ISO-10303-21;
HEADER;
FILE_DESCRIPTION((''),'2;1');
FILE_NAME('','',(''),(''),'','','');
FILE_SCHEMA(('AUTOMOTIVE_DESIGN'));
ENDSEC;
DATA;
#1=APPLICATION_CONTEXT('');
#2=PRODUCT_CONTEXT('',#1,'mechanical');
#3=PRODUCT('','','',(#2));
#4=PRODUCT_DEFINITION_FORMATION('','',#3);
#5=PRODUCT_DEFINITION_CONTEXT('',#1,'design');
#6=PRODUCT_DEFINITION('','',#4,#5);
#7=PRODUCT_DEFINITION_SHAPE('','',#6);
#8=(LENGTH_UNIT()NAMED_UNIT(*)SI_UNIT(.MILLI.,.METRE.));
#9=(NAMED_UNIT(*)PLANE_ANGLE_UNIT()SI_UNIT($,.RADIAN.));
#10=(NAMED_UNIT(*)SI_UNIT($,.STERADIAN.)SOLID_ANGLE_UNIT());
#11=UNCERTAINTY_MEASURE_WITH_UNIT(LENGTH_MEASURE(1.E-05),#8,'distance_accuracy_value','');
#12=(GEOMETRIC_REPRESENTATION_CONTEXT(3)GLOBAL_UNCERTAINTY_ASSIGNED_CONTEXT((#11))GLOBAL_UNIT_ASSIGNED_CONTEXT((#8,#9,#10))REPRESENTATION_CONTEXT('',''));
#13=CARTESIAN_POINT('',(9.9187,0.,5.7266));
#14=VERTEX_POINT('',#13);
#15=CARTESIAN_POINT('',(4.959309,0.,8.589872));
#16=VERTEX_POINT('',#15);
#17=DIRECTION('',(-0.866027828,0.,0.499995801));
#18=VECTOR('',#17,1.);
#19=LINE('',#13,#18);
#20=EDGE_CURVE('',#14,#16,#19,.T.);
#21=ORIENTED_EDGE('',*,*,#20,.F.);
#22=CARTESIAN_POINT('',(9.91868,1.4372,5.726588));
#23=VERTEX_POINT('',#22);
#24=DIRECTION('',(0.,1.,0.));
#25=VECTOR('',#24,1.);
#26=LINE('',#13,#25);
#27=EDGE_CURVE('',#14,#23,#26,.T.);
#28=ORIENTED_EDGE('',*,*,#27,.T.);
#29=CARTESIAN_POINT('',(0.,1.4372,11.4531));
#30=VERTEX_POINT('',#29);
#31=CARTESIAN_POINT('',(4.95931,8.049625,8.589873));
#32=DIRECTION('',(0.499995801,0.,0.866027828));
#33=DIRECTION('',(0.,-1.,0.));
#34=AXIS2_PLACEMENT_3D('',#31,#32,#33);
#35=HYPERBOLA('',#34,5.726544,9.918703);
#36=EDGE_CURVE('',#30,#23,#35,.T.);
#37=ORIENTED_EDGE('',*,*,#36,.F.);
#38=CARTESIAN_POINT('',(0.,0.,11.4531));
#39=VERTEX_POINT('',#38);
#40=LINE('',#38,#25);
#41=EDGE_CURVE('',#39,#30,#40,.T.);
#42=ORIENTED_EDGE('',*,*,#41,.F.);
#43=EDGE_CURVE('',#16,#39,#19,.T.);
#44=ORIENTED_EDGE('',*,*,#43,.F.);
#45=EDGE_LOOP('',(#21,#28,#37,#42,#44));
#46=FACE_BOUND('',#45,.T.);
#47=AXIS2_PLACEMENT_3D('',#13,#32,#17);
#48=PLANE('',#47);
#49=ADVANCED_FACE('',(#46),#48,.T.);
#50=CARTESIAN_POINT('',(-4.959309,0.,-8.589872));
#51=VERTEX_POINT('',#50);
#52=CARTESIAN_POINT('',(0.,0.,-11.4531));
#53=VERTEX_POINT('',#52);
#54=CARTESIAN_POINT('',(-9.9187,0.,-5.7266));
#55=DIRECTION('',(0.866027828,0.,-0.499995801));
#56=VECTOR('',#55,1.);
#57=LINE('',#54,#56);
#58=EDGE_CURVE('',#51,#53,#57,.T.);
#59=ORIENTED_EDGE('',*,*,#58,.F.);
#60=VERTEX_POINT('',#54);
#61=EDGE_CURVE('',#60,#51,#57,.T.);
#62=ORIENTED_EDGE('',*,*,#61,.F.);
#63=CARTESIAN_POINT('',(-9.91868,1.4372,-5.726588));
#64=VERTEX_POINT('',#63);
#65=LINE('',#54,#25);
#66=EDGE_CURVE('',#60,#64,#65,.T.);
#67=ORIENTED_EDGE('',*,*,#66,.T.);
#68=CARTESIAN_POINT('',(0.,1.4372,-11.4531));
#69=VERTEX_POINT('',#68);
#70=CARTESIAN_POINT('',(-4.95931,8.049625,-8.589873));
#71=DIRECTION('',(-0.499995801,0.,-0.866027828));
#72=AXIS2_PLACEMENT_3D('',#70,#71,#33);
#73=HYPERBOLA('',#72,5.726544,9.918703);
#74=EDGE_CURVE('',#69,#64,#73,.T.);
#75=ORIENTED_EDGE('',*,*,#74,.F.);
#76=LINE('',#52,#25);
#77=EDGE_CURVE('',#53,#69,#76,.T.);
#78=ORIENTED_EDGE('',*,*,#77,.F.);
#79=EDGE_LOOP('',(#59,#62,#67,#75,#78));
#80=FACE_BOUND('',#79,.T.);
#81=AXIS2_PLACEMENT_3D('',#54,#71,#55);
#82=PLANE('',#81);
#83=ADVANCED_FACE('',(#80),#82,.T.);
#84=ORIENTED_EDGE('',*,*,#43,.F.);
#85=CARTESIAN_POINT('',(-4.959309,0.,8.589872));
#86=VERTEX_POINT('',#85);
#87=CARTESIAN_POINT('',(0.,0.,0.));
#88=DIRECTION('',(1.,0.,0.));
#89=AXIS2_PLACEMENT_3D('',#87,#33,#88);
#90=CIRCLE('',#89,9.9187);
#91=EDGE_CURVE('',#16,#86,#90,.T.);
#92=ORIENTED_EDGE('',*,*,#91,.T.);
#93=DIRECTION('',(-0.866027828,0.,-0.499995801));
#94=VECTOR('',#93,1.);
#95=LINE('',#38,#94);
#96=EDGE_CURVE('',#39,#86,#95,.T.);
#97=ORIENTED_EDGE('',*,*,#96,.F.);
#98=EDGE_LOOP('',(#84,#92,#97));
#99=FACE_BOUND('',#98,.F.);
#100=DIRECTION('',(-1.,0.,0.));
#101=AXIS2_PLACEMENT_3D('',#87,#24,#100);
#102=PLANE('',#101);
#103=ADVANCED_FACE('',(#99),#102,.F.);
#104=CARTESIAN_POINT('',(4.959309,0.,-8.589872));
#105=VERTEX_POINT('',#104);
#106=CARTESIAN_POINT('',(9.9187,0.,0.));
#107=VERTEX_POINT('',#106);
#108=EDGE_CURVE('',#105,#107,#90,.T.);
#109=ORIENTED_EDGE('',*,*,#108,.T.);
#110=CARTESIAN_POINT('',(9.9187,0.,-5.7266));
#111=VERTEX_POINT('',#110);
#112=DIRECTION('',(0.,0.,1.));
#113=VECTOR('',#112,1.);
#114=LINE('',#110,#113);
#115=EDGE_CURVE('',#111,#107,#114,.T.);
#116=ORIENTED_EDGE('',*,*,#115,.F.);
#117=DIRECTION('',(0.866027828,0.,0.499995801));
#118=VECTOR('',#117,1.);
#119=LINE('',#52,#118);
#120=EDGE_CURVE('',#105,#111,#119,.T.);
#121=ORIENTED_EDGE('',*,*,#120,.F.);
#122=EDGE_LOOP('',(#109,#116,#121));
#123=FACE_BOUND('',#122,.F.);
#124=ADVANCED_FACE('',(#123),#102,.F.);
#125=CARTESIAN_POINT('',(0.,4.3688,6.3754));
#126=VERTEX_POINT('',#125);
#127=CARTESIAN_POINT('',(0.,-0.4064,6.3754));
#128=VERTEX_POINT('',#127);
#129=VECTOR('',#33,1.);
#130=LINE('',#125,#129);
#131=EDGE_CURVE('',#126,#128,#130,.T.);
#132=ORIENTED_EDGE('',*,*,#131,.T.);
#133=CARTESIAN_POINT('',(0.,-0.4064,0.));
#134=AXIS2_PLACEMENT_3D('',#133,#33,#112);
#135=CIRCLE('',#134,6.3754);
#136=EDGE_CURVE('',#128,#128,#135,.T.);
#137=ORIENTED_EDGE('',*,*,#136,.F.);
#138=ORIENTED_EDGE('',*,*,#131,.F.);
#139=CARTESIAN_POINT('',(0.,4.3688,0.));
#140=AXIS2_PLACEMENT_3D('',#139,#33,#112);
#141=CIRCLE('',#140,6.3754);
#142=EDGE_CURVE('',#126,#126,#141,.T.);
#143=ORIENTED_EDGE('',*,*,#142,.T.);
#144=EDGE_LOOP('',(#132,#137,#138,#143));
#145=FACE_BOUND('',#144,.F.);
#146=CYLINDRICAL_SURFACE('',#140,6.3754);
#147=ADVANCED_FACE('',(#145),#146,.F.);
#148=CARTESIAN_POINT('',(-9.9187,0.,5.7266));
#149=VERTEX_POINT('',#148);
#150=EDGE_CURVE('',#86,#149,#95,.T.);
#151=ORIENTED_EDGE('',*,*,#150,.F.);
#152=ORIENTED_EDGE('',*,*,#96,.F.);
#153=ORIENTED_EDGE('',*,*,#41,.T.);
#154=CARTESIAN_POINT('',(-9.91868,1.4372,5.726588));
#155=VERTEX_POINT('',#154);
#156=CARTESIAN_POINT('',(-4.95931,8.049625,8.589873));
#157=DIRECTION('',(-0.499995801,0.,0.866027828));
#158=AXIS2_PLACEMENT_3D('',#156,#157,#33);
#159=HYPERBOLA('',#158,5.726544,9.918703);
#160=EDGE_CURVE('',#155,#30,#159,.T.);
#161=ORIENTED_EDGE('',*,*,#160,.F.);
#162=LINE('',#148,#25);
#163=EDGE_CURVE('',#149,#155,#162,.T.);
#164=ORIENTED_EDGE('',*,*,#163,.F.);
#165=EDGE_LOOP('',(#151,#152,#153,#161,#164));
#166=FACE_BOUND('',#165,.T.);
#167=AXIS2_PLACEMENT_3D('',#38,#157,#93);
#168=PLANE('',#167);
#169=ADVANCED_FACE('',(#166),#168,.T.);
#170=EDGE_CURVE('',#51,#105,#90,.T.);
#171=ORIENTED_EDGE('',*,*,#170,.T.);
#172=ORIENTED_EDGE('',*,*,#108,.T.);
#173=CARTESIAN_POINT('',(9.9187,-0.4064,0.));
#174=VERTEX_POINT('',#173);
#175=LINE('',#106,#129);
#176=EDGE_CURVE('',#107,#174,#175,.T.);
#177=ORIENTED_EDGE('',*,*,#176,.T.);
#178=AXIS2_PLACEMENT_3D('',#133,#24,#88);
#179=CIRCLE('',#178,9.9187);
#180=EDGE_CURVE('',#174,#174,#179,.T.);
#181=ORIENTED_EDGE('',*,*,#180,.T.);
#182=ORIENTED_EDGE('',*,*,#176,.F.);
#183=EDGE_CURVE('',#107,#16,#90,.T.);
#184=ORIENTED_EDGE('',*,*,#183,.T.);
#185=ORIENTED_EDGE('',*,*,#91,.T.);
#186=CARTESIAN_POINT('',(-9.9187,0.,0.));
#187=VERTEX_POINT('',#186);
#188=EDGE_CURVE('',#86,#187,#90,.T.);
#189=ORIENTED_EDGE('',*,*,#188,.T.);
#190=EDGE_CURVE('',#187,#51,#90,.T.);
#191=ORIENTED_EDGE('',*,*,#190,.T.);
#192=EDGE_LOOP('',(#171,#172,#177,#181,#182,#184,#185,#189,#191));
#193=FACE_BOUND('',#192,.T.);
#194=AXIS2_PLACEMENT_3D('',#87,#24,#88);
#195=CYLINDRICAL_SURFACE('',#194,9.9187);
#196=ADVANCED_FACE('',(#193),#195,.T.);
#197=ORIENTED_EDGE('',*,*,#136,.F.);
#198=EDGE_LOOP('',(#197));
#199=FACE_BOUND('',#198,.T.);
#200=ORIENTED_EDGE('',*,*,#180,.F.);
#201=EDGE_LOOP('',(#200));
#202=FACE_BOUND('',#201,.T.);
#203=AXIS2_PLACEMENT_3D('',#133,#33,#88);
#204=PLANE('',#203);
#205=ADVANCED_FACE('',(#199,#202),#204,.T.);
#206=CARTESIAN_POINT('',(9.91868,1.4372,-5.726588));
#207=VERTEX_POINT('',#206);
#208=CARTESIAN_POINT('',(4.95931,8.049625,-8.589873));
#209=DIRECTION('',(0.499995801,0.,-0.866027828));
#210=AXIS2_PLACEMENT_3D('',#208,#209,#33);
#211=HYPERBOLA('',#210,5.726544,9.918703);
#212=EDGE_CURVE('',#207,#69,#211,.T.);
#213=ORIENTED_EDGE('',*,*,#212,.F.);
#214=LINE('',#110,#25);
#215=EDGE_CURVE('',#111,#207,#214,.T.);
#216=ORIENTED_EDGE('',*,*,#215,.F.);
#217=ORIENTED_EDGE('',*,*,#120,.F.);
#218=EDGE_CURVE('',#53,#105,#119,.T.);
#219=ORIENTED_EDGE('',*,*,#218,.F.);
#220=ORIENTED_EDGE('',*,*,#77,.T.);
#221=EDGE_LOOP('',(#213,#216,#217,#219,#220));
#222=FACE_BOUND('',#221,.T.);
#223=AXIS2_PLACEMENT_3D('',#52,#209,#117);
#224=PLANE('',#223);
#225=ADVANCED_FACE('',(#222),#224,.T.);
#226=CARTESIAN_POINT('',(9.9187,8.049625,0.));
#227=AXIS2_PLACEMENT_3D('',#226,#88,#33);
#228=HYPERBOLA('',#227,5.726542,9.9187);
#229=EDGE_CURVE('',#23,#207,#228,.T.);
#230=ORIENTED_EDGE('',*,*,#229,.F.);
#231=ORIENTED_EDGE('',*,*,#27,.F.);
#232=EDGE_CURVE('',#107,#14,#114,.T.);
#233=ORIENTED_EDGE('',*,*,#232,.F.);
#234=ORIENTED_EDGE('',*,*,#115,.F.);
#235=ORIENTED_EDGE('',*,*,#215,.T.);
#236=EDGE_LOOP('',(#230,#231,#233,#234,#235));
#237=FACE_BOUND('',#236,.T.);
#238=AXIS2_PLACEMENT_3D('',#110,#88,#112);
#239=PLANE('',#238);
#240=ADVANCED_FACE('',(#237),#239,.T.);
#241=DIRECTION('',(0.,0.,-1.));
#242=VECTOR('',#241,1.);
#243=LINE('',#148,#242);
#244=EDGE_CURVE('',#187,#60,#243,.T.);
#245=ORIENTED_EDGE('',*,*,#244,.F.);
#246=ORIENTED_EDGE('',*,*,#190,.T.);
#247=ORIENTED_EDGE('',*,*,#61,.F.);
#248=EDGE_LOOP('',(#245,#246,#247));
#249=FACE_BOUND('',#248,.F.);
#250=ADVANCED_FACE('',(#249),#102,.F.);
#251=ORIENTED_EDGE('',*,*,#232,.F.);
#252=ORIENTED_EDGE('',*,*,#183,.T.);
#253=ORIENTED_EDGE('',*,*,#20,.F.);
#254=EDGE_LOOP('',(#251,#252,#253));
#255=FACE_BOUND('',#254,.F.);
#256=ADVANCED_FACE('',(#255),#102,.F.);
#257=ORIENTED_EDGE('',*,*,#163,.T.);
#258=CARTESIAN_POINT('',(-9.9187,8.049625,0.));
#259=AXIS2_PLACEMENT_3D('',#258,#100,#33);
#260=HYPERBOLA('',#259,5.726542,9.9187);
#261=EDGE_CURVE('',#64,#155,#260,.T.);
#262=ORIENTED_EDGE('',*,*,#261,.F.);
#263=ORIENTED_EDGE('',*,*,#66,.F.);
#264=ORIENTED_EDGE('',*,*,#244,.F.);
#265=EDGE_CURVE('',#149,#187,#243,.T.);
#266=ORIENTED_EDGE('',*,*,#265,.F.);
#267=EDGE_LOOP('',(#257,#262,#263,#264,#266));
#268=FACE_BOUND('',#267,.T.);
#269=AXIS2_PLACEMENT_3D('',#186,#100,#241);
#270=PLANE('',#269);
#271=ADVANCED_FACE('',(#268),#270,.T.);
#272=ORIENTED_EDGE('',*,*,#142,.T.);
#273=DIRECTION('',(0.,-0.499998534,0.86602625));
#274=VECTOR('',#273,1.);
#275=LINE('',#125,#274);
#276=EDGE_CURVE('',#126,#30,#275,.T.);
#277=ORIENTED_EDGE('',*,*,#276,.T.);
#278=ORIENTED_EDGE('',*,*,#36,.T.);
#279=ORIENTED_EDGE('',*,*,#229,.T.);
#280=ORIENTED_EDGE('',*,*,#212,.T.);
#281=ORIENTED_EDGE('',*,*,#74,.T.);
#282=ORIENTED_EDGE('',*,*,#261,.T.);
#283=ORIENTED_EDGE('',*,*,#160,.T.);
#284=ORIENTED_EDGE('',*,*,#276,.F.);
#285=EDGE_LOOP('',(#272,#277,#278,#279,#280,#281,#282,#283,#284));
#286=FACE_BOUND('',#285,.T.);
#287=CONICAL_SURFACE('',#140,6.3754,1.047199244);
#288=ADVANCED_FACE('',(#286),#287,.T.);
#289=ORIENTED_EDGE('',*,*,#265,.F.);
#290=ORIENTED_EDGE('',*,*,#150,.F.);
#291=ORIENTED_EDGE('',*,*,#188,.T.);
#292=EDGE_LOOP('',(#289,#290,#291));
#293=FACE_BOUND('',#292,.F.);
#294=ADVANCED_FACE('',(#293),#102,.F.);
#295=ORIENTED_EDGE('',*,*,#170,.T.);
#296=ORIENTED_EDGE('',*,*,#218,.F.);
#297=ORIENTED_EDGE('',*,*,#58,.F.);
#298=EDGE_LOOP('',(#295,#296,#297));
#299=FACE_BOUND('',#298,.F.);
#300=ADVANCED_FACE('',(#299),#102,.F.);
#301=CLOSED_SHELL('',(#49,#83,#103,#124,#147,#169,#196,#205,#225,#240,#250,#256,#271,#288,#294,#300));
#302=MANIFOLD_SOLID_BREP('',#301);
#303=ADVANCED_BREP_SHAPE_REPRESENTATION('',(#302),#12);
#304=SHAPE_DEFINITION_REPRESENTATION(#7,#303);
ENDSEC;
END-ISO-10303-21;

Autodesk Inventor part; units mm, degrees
ref_plane "YZ Plane" through (0, 0, 0) normal (1, 0, 0) x (0, 1, 0)
ref_plane "XZ Plane" through (0, 0, 0) normal (0, 1, 0) x (-1, 0, 0)
sketch "Sketch1" plane through (0, 0, 0) normal (0, 1, 0) x (-1, 0, 0)
  circle A0 centre (0, 0) radius 9.9187
  line L0 (9.9187, -5.7266) -> (0, -11.4531)
  line L1 (0, -11.4531) -> (-9.9187, -5.7266)
  line L2 (-9.9187, -5.7266) -> (-9.9187, 5.7266)
  line L3 (-9.9187, 5.7266) -> (0, 11.4531)
  line L4 (0, 11.4531) -> (9.9187, 5.7266)
  line L5 (9.9187, 5.7266) -> (9.9187, -5.7266)
  line L6 (0, 13.376) -> (0, -12.9473) construction
  point P0 (9.9187, 0)
  dimension "d0" = 19.8374
extrude "Extrusion1" add sketch "Sketch1" along normal blind 4.3688
sketch "Sketch2" plane through (0, 0, 0) normal (0, -1, 0) x (1, 0, 0)
  circle A0 centre (0, 0) radius 9.9187
  line L0 (0, 11.4531) -> (9.9187, 5.7266) projected
extrude "Extrusion2" add sketch "Sketch2" along normal blind 0.4064
sketch "Sketch3" plane through (0, 4.3688, 0) normal (0, 1, 0) x (1, 0, 0)
  point P0 (0, 0)
  point P1 (0, 0)
hole "Hole1" at (0, 4.3688, 0) direction (0, -1, 0) diameter 12.7508 end through all
thread "Thread1" size "9/16-18 UNF" class "2B" standard "ANSI Unified Screw Threads" full length
ref_plane "Work Plane1" through (0, 0, -5.7266) normal (1, 0, 0) x (0, 0, -1)
sketch "Sketch5" plane through (0, 0, -5.7266) normal (1, 0, 0) x (0, 0, -1)
  line L0 (-12.102, 4.3688) -> (0.6488, 4.3688) projected
  line L1 (-12.102, 4.3688) -> (-17.1797, 4.3688)
  line L2 (-12.102, 4.3688) -> (-17.1797, 1.4372)
  line L3 (-17.1797, 1.4372) -> (-17.1797, 4.3688)
  line L4 (-5.7266, 0) -> (-5.7266, 18.228)
  dimension "d17" = 30
revolve "Revolution1" cut sketch "Sketch5" angle 360 about axis through (0, 0, 0) along (0, 1, 0)
properties part number "13_8"
